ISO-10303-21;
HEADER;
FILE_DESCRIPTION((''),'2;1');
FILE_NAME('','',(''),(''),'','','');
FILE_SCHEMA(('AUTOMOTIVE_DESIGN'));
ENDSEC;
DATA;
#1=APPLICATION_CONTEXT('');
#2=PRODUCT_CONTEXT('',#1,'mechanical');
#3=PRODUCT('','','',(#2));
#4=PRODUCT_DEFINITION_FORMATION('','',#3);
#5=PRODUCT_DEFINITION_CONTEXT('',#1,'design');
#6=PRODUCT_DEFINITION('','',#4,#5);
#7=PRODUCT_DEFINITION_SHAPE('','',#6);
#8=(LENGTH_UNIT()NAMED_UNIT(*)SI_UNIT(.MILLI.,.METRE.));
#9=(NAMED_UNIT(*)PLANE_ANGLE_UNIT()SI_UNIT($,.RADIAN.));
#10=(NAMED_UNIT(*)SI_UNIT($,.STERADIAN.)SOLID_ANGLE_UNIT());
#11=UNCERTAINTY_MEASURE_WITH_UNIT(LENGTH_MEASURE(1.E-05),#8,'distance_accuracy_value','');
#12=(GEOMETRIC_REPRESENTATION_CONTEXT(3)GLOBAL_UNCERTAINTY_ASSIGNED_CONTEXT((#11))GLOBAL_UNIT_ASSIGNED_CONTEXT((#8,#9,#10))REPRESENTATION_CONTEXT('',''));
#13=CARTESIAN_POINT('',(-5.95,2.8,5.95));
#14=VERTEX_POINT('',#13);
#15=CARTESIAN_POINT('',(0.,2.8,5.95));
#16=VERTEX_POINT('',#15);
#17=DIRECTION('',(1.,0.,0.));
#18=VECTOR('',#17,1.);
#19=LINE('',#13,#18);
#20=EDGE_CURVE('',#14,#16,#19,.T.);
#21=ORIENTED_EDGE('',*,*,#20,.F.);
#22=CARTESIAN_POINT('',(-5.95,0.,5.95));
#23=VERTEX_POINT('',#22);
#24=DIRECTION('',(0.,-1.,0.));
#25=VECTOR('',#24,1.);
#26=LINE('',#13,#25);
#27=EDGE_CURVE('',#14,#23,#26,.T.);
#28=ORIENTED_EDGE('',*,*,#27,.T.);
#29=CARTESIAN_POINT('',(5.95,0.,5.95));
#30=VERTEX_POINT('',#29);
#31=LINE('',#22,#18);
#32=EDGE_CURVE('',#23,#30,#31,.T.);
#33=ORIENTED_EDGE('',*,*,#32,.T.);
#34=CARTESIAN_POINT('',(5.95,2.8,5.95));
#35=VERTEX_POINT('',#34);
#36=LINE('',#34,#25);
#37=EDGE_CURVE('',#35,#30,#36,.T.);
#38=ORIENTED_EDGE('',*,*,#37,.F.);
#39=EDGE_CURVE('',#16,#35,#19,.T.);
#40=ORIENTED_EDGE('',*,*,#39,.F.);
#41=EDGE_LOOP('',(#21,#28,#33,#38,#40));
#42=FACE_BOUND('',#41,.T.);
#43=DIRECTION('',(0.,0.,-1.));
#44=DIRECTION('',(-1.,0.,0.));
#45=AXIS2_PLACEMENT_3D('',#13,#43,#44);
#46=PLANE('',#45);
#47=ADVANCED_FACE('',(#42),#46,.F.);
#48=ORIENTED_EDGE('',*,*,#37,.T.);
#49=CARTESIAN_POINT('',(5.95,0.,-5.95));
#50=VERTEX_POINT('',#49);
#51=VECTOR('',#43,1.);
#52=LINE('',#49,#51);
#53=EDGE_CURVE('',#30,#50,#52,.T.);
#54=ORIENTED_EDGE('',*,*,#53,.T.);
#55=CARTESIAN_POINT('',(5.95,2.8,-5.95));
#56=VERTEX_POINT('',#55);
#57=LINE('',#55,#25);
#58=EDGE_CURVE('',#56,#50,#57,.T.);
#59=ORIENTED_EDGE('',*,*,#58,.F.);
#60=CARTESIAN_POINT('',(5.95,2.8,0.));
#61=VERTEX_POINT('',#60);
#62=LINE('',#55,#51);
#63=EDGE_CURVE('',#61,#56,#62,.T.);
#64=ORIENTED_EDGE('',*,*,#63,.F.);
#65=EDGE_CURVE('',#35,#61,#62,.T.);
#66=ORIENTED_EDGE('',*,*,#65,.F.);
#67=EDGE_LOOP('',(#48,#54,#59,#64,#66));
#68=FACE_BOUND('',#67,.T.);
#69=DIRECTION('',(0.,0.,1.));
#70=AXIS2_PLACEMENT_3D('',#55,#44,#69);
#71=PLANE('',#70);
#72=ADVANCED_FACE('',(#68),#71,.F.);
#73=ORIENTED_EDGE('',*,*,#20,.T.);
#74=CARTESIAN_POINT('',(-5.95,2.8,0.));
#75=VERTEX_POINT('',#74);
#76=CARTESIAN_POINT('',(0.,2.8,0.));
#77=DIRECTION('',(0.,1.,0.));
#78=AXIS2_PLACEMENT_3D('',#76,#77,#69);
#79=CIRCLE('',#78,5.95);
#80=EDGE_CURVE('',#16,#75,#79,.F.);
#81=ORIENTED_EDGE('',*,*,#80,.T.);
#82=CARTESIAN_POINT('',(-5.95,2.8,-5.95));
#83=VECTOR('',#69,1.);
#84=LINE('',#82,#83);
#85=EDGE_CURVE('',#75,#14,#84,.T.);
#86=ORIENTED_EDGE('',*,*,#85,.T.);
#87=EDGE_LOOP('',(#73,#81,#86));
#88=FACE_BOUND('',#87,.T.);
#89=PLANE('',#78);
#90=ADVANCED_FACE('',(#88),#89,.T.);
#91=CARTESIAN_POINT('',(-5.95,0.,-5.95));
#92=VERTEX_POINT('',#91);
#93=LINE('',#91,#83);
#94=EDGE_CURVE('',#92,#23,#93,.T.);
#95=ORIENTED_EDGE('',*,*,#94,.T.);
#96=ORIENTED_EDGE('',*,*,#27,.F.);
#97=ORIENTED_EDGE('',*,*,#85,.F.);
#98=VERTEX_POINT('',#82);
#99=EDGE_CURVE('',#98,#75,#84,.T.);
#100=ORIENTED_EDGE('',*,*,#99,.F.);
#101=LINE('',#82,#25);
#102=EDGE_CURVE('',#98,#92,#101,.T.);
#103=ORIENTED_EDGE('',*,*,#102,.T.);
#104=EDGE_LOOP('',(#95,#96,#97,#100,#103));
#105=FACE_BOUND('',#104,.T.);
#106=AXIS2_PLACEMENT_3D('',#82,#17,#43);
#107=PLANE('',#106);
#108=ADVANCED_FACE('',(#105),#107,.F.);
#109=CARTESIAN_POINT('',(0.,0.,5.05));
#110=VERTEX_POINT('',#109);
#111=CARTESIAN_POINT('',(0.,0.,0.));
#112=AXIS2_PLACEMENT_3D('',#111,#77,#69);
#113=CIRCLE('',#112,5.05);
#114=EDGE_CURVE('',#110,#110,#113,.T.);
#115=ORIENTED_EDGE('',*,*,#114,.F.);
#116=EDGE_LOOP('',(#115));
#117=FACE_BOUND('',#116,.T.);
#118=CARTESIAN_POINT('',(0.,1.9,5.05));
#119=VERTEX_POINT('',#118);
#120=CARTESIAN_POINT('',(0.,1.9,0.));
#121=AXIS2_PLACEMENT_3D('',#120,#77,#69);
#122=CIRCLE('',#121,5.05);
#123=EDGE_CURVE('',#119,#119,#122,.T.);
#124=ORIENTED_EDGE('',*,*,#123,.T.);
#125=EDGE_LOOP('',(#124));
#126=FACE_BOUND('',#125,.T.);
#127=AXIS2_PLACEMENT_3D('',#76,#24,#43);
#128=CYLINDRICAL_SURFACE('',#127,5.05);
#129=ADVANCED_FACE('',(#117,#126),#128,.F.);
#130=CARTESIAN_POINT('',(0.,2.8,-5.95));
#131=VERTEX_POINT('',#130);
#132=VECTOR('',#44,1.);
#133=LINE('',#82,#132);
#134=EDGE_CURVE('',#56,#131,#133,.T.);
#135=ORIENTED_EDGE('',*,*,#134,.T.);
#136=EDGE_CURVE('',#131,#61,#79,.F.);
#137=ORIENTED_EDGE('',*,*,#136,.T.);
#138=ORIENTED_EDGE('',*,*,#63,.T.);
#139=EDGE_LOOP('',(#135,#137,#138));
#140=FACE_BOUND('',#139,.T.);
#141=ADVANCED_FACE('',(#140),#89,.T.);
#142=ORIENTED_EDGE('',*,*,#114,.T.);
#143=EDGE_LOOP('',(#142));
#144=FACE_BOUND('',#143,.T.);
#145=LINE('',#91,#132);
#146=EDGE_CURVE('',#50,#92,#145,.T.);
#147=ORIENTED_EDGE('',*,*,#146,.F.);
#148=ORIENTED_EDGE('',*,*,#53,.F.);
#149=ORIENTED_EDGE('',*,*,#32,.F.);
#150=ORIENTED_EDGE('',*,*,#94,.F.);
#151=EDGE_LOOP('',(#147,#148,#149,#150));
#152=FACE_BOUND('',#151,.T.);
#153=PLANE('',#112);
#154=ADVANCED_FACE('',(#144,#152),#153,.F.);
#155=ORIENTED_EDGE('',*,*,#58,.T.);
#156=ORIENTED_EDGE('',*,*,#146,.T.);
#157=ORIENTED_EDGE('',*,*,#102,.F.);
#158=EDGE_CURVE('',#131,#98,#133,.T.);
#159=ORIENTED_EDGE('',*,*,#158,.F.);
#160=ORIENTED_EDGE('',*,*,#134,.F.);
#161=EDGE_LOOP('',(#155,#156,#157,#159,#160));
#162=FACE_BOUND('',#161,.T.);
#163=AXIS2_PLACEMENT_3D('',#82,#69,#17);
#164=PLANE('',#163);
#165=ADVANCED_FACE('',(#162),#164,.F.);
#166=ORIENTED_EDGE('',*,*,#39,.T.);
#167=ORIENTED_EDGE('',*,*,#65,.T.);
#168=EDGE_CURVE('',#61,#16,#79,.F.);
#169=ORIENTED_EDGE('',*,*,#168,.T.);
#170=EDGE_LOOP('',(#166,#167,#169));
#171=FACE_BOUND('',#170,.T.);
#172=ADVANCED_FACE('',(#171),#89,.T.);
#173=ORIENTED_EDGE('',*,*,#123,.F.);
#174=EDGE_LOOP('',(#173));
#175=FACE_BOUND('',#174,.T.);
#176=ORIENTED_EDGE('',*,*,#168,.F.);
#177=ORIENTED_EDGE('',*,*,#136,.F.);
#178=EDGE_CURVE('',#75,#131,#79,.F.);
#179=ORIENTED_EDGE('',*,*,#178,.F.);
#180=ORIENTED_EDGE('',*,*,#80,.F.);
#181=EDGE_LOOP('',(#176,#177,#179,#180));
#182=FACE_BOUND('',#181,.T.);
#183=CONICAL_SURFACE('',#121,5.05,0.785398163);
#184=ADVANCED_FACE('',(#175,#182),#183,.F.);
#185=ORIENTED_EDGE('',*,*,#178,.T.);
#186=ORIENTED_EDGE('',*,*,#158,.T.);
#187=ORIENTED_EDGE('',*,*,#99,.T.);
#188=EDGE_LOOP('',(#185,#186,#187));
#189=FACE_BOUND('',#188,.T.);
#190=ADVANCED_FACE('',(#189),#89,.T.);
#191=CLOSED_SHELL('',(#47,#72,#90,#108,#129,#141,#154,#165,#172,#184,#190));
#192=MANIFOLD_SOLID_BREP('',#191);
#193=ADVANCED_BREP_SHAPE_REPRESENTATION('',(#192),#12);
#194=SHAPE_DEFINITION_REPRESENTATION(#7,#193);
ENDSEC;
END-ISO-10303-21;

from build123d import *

# Parameters (mm, degrees)
SKETCH_1_W      = 11.9
SKETCH_1_H      = 11.9
SKETCH_1_R      = 5.05
EXTRUDE_1_DEPTH = 2.8
CHAMFER_1_SIZE  = 0.9


with BuildPart() as part:
    # 草图1 → 凸台-拉伸1 (new body)
    with BuildSketch(Plane(origin=(0, 0, 0), x_dir=(1, 0, 0), z_dir=(0, 1, 0))):
        Rectangle(SKETCH_1_W, SKETCH_1_H)
        with Locations(Location((0, 0, 0), (0, 0, 270))):
            Circle(SKETCH_1_R, mode=Mode.SUBTRACT)
    extrude(amount=EXTRUDE_1_DEPTH)

    # 倒角1
    chamfer_1_edges = [part.edges().sort_by_distance(p)[0] for p in [
        (0, 2.8, -5.05),
    ]]
    chamfer(chamfer_1_edges, length=CHAMFER_1_SIZE - 0.0001)  # a hair under: the kernel refuses the full size


solid = part.part
